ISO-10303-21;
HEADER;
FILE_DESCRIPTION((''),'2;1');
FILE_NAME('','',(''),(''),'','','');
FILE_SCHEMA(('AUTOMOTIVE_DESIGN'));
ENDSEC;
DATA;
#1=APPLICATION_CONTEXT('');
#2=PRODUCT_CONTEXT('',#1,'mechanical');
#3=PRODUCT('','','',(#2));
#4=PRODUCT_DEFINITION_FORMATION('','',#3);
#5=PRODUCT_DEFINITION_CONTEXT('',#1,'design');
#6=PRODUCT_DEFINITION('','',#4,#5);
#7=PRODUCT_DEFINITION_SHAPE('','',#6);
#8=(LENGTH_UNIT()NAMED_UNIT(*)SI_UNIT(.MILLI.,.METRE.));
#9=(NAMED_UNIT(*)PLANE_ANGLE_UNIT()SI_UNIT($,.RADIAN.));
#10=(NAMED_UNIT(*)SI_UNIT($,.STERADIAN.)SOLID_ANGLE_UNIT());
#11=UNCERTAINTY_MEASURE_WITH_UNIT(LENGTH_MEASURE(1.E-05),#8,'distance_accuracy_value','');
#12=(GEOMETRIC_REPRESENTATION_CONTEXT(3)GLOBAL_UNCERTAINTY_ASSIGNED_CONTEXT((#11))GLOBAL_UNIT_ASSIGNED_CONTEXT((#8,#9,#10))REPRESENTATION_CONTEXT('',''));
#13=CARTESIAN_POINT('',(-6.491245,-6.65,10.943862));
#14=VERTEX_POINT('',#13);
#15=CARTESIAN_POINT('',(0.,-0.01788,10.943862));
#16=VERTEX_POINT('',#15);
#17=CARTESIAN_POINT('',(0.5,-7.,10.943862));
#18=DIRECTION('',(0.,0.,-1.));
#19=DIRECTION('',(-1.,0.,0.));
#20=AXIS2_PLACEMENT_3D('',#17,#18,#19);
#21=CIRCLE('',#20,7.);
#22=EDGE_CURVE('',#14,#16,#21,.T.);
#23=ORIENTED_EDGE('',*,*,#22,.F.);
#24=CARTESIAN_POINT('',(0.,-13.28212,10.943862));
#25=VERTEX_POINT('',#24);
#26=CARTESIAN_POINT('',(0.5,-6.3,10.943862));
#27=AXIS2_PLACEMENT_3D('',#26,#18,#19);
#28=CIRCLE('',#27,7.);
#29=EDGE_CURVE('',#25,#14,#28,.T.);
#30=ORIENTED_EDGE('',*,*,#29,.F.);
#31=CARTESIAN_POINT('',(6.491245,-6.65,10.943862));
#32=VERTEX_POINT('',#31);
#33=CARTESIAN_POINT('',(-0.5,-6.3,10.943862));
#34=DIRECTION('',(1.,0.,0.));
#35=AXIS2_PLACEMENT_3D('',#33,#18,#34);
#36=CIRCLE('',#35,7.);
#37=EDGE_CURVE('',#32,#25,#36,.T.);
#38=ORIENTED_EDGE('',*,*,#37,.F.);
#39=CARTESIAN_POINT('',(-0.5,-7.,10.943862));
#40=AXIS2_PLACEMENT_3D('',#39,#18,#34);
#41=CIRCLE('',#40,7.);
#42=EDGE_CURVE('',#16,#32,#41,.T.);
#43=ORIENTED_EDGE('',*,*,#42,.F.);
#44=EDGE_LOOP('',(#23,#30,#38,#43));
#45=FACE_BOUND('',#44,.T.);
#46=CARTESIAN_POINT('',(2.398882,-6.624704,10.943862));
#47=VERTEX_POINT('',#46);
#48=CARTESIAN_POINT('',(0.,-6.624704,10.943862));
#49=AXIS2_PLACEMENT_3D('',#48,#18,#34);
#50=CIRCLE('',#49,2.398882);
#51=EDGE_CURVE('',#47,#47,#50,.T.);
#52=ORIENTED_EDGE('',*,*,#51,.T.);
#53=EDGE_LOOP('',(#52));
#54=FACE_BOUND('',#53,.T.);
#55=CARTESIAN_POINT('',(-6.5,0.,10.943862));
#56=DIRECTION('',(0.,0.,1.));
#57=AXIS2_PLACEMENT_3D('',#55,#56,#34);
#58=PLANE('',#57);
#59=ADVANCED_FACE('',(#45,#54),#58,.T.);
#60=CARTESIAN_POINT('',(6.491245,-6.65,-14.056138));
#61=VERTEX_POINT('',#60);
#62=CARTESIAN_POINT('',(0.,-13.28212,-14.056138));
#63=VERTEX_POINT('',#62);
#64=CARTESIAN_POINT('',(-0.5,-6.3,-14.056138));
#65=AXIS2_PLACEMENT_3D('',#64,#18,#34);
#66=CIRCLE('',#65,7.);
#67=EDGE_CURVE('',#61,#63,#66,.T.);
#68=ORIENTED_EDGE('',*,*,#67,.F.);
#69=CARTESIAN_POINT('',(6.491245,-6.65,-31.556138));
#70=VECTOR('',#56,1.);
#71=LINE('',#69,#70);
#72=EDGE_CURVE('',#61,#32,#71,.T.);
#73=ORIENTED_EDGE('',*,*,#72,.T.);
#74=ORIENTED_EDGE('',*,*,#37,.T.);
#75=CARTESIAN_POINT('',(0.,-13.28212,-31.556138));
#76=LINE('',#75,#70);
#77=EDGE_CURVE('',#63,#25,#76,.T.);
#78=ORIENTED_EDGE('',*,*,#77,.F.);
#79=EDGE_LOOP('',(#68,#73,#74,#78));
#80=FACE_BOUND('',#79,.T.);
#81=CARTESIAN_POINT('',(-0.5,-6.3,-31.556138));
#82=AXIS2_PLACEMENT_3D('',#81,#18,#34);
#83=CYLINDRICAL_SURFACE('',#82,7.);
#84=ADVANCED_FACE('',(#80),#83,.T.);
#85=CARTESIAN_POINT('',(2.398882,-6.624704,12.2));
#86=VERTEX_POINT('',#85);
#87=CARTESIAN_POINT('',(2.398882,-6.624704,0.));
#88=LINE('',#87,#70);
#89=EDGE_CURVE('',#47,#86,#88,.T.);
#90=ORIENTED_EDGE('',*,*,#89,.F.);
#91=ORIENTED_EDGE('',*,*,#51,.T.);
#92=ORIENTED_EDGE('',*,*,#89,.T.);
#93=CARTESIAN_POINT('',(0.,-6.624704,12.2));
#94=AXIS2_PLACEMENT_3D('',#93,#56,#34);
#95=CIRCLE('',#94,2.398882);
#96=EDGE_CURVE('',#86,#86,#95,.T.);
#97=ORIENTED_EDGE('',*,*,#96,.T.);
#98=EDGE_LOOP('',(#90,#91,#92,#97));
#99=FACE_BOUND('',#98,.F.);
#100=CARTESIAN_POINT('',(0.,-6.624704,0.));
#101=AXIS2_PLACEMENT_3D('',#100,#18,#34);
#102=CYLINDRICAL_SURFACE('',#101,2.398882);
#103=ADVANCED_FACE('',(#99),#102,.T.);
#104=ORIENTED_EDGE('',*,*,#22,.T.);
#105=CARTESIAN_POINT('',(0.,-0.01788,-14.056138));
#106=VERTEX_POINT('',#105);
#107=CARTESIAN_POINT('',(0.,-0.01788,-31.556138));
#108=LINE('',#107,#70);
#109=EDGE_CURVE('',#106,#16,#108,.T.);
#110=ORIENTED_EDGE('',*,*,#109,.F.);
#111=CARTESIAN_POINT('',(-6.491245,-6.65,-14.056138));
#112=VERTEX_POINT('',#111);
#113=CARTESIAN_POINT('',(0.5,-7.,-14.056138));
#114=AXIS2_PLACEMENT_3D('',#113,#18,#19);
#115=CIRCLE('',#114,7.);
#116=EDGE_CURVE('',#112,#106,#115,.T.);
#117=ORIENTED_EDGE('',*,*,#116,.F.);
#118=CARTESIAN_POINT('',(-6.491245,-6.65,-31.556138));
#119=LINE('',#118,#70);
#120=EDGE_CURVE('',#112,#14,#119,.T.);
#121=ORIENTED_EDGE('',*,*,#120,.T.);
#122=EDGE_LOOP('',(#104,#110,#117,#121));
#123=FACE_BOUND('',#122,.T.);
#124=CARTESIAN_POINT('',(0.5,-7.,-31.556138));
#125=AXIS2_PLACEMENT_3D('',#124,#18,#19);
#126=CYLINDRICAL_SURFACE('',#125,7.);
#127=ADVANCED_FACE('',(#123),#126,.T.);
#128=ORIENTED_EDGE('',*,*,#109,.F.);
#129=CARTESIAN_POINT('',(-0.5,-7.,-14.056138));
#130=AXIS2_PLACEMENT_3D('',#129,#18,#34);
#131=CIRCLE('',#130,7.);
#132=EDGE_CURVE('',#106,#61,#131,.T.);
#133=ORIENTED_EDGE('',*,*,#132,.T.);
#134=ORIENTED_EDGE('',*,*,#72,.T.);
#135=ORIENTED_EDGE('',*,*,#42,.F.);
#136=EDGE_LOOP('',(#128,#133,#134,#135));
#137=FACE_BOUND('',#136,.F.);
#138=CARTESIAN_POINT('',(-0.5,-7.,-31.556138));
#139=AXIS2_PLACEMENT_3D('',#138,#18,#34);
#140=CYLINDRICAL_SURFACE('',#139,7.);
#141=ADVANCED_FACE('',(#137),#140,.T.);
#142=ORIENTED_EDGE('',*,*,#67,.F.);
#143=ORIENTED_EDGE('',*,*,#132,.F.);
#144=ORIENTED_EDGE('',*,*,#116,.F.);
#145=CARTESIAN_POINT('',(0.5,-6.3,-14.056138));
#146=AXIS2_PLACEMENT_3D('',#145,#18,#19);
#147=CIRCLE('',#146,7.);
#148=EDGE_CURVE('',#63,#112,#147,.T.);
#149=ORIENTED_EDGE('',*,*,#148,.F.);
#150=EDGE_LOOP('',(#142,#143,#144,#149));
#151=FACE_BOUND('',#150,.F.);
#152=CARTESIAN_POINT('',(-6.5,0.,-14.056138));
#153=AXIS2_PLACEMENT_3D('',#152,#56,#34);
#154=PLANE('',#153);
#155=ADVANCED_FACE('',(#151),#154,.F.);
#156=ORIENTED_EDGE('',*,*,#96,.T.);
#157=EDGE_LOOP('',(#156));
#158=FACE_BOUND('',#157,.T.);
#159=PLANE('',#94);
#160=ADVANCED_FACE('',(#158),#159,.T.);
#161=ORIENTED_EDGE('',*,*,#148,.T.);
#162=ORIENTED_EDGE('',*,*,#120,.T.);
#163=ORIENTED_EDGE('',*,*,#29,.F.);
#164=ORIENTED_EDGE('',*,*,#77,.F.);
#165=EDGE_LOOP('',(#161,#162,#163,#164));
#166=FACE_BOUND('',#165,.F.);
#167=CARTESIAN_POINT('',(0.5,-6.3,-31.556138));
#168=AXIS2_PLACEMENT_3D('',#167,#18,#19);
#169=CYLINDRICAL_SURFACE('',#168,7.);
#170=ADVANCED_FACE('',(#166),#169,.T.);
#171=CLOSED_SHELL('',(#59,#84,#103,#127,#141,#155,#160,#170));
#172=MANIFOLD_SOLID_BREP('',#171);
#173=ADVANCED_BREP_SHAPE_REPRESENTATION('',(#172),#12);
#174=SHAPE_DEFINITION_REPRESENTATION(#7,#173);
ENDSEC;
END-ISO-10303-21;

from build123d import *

# Parameters (mm, degrees)
F0_W        = 13
F0_H        = 25
F1_DEPTH    = 13.3
F2_T1_DEPTH = 60
F3_R        = 2.3988819555
F4_DEPTH    = 12.2


# Not quite as in the source:
# - a fillet or chamfer that OpenCascade refuses, or shapes differently, is made with other operations: its cross-section is extruded or revolved along the edge and cut away or added
# - a feature names something its author has since deleted; it is built from what else it names


with BuildPart() as f1:
    # F0 (on Front) → F1 (new body)
    with BuildSketch(Plane.XZ):
        with Locations((0, -1.5561378314)):
            Rectangle(F0_W, F0_H)
    extrude(amount=F1_DEPTH)

    # F2: fillet of radius 7 on 4 edges, made by hand

    # F2_s2 → F2_t1 (cut)
    with BuildSketch(Plane.XY.offset(-31.5561378314)):
        with BuildLine():
            ThreePointArc((6.5, -6.3), (4.4497474683, -11.2497474683), (-0.5, -13.3))
            Line((-0.5, -13.3), (6.5, -13.3))
            Line((6.5, -13.3), (6.5, -6.3))
        make_face()
        with BuildLine():
            ThreePointArc((6.5, -7), (4.4497474683, -2.0502525317), (-0.5, 0))
            Line((-0.5, 0), (6.5, 0))
            Line((6.5, 0), (6.5, -7))
        make_face()
        with BuildLine():
            ThreePointArc((-6.5, -7), (-4.4497474683, -2.0502525317), (0.5, 0))
            Line((0.5, 0), (-6.5, 0))
            Line((-6.5, 0), (-6.5, -7))
        make_face()
        with BuildLine():
            ThreePointArc((-6.5, -6.3), (-4.4497474683, -11.2497474683), (0.5, -13.3))
            Line((0.5, -13.3), (-6.5, -13.3))
            Line((-6.5, -13.3), (-6.5, -6.3))
        make_face()
    extrude(amount=F2_T1_DEPTH, mode=Mode.SUBTRACT)

    # F3 (on Top) → F4 (join)
    with BuildSketch(Plane.XY):
        with Locations((0, -6.6247042269)):
            Circle(F3_R)
    extrude(amount=F4_DEPTH)


solid = f1.part
